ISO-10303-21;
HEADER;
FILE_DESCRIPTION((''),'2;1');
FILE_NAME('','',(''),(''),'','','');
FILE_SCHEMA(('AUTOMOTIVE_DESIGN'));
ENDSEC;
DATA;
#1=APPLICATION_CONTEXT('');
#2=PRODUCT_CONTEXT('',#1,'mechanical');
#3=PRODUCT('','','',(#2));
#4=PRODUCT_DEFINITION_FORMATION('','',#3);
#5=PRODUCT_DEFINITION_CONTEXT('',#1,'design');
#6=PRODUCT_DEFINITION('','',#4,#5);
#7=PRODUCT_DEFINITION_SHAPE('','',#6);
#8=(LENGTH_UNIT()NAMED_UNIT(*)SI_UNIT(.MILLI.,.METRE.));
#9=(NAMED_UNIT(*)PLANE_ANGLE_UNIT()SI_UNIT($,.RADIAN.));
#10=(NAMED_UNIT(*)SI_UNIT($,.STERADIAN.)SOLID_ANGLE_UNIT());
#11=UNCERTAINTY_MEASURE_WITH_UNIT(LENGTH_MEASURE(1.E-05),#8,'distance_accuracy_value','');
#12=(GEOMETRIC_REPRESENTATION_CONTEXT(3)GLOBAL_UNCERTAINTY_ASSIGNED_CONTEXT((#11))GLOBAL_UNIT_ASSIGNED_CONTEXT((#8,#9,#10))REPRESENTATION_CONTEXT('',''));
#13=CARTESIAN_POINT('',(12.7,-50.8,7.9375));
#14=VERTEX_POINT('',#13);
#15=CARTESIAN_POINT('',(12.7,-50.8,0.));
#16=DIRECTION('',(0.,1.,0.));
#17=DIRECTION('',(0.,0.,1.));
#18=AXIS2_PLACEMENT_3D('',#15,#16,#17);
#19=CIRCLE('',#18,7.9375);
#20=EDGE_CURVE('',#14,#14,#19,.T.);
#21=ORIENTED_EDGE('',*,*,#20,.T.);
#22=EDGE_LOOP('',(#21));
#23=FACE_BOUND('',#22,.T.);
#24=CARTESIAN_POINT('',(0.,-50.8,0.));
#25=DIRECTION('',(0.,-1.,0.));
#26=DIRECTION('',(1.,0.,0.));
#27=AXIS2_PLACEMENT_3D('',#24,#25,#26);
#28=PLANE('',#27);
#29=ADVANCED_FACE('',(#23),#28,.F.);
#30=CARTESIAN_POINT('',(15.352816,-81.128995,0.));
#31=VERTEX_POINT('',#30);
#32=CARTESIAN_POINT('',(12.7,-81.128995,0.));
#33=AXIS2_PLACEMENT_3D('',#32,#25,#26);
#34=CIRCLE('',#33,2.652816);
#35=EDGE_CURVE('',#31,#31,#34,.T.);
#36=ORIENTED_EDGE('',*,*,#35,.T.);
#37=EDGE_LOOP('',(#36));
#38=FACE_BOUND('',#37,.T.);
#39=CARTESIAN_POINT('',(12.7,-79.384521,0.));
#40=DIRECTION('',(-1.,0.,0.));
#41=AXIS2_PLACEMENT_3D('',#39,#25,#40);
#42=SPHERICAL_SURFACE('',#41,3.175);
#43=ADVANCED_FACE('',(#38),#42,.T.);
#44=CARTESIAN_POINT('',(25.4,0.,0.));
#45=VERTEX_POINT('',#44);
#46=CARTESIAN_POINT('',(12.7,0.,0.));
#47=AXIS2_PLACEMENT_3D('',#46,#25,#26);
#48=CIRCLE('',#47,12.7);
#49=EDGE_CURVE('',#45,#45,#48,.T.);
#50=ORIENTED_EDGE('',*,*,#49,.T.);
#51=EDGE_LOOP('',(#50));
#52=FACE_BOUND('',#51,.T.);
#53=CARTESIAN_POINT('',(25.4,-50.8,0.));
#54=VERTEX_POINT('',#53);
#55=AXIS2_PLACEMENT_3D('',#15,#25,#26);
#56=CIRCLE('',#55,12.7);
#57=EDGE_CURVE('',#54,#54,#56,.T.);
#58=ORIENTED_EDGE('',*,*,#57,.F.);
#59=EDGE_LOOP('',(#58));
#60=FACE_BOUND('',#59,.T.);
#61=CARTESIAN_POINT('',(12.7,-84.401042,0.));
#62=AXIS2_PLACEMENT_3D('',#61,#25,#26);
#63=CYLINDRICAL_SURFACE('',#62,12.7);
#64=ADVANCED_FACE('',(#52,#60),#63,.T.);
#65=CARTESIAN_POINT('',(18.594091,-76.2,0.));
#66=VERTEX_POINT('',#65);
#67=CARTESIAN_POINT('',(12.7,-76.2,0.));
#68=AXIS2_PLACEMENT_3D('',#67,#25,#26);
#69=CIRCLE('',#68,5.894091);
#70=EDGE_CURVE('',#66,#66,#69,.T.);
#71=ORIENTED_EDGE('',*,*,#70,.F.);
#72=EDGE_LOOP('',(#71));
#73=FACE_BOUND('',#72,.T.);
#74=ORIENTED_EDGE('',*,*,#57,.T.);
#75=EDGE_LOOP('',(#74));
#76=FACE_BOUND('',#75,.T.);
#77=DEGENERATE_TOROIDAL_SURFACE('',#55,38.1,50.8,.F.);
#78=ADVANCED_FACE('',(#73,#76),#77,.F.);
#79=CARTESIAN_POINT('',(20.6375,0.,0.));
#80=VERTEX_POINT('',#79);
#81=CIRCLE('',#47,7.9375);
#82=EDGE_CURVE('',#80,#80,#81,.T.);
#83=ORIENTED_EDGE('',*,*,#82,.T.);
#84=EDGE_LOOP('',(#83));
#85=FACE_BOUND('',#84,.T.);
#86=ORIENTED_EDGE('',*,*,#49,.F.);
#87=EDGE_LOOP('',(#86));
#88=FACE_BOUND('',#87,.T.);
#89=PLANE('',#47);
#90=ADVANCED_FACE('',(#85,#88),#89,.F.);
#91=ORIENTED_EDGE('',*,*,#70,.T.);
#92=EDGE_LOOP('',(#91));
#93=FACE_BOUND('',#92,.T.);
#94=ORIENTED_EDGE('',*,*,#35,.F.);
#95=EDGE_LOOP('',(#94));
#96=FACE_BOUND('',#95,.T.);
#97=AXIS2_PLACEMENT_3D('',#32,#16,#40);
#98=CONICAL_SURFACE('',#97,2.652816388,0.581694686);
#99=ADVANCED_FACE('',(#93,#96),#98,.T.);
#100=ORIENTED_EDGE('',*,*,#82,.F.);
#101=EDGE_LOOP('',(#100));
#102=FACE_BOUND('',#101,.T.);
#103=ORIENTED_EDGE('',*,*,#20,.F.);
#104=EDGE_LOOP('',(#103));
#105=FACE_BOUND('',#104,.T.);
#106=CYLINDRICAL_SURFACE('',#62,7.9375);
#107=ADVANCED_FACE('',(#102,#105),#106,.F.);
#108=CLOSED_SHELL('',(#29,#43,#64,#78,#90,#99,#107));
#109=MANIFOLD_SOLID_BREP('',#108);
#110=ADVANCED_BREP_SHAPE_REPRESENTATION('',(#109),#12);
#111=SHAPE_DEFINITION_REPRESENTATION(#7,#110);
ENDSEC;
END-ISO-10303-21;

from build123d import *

# Parameters (mm, degrees)
CUT_EXTRUDE1_DEPTH      = 90.050468029
CUT_EXTRUDE1_DEPTH_BACK = 90.050468029
SKETCH3_W               = 27.181091561
SKETCH3_H               = 38.454465552


# Read off the part's stored shape, not the designer's step: Shell2
with BuildPart() as part:
    # Sketch1 → Revolve1 (revolve)
    with BuildSketch(Plane.XY, mode=Mode.PRIVATE) as revolve1_sk:
        with BuildLine():
            Line((0, 0), (0, -50.8))
            ThreePointArc((0, -50.8), (3.280951188, -68.760512242), (12.7, -84.401041651))
            Line((12.7, -84.401041651), (12.7, 0))
            Line((12.7, 0), (0, 0))
        make_face()
    revolve(revolve1_sk.sketch.rotate(Axis((12.7, -84.401041651, 0), (0, 1, 0)), 180), axis=Axis((12.7, -84.401041651, 0), (0, 1, 0)))

    # Shell2 outline → Shell2 (revolve, cut)
    with BuildSketch(Plane(origin=(12.7, 0, 0), x_dir=(1, 0, 0), z_dir=(0, 0, 1))):
        with BuildLine():
            Line((0, 0), (0, -76.642627696))
            add(Edge.make_bspline(
                [(7.9375, -50.8), (7.9375, -64.940305721), (0, -76.642627696)],
                knots=[0, 0, 0, 0.596002439, 0.596002439, 0.596002439], degree=2, weights=[1, 0.95592526, 1]))
            Line((7.9375, -50.8), (7.9375, 0))
            Line((7.9375, 0), (0, 0))
        make_face()
    revolve(axis=Axis((12.7, 0, 0), (0, 1, 0)), mode=Mode.SUBTRACT)

    # Sketch3 → Cut-Extrude1 (cut, two sides: drawn at the far end of the back side and taken through both)
    with BuildSketch(Plane.XY.offset(-CUT_EXTRUDE1_DEPTH_BACK)):
        with Locations((13.590545781, -70.027232776)):
            Rectangle(SKETCH3_W, SKETCH3_H)
    extrude(amount=CUT_EXTRUDE1_DEPTH + CUT_EXTRUDE1_DEPTH_BACK, mode=Mode.SUBTRACT)

    # Sketch2 → Revolve3 (revolve)
    with BuildSketch(Plane.XY, mode=Mode.PRIVATE) as revolve3_sk:
        with BuildLine():
            Line((12.7, -82.559521115), (12.7, -50.8))
            Line((12.7, -50.8), (0, -50.8))
            ThreePointArc((0, -50.8), (1.730968025, -63.948007491), (6.805909488, -76.2))
            Line((6.805909488, -76.2), (10.047183612, -81.128995309))
            ThreePointArc((10.047183612, -81.128995309), (11.193029623, -82.179098952), (12.7, -82.559521115))
        make_face()
    revolve(revolve3_sk.sketch.rotate(Axis((12.7, -82.559521115, 0), (0, 1, 0)), 180), axis=Axis((12.7, -82.559521115, 0), (0, 1, 0)))


solid = part.part
